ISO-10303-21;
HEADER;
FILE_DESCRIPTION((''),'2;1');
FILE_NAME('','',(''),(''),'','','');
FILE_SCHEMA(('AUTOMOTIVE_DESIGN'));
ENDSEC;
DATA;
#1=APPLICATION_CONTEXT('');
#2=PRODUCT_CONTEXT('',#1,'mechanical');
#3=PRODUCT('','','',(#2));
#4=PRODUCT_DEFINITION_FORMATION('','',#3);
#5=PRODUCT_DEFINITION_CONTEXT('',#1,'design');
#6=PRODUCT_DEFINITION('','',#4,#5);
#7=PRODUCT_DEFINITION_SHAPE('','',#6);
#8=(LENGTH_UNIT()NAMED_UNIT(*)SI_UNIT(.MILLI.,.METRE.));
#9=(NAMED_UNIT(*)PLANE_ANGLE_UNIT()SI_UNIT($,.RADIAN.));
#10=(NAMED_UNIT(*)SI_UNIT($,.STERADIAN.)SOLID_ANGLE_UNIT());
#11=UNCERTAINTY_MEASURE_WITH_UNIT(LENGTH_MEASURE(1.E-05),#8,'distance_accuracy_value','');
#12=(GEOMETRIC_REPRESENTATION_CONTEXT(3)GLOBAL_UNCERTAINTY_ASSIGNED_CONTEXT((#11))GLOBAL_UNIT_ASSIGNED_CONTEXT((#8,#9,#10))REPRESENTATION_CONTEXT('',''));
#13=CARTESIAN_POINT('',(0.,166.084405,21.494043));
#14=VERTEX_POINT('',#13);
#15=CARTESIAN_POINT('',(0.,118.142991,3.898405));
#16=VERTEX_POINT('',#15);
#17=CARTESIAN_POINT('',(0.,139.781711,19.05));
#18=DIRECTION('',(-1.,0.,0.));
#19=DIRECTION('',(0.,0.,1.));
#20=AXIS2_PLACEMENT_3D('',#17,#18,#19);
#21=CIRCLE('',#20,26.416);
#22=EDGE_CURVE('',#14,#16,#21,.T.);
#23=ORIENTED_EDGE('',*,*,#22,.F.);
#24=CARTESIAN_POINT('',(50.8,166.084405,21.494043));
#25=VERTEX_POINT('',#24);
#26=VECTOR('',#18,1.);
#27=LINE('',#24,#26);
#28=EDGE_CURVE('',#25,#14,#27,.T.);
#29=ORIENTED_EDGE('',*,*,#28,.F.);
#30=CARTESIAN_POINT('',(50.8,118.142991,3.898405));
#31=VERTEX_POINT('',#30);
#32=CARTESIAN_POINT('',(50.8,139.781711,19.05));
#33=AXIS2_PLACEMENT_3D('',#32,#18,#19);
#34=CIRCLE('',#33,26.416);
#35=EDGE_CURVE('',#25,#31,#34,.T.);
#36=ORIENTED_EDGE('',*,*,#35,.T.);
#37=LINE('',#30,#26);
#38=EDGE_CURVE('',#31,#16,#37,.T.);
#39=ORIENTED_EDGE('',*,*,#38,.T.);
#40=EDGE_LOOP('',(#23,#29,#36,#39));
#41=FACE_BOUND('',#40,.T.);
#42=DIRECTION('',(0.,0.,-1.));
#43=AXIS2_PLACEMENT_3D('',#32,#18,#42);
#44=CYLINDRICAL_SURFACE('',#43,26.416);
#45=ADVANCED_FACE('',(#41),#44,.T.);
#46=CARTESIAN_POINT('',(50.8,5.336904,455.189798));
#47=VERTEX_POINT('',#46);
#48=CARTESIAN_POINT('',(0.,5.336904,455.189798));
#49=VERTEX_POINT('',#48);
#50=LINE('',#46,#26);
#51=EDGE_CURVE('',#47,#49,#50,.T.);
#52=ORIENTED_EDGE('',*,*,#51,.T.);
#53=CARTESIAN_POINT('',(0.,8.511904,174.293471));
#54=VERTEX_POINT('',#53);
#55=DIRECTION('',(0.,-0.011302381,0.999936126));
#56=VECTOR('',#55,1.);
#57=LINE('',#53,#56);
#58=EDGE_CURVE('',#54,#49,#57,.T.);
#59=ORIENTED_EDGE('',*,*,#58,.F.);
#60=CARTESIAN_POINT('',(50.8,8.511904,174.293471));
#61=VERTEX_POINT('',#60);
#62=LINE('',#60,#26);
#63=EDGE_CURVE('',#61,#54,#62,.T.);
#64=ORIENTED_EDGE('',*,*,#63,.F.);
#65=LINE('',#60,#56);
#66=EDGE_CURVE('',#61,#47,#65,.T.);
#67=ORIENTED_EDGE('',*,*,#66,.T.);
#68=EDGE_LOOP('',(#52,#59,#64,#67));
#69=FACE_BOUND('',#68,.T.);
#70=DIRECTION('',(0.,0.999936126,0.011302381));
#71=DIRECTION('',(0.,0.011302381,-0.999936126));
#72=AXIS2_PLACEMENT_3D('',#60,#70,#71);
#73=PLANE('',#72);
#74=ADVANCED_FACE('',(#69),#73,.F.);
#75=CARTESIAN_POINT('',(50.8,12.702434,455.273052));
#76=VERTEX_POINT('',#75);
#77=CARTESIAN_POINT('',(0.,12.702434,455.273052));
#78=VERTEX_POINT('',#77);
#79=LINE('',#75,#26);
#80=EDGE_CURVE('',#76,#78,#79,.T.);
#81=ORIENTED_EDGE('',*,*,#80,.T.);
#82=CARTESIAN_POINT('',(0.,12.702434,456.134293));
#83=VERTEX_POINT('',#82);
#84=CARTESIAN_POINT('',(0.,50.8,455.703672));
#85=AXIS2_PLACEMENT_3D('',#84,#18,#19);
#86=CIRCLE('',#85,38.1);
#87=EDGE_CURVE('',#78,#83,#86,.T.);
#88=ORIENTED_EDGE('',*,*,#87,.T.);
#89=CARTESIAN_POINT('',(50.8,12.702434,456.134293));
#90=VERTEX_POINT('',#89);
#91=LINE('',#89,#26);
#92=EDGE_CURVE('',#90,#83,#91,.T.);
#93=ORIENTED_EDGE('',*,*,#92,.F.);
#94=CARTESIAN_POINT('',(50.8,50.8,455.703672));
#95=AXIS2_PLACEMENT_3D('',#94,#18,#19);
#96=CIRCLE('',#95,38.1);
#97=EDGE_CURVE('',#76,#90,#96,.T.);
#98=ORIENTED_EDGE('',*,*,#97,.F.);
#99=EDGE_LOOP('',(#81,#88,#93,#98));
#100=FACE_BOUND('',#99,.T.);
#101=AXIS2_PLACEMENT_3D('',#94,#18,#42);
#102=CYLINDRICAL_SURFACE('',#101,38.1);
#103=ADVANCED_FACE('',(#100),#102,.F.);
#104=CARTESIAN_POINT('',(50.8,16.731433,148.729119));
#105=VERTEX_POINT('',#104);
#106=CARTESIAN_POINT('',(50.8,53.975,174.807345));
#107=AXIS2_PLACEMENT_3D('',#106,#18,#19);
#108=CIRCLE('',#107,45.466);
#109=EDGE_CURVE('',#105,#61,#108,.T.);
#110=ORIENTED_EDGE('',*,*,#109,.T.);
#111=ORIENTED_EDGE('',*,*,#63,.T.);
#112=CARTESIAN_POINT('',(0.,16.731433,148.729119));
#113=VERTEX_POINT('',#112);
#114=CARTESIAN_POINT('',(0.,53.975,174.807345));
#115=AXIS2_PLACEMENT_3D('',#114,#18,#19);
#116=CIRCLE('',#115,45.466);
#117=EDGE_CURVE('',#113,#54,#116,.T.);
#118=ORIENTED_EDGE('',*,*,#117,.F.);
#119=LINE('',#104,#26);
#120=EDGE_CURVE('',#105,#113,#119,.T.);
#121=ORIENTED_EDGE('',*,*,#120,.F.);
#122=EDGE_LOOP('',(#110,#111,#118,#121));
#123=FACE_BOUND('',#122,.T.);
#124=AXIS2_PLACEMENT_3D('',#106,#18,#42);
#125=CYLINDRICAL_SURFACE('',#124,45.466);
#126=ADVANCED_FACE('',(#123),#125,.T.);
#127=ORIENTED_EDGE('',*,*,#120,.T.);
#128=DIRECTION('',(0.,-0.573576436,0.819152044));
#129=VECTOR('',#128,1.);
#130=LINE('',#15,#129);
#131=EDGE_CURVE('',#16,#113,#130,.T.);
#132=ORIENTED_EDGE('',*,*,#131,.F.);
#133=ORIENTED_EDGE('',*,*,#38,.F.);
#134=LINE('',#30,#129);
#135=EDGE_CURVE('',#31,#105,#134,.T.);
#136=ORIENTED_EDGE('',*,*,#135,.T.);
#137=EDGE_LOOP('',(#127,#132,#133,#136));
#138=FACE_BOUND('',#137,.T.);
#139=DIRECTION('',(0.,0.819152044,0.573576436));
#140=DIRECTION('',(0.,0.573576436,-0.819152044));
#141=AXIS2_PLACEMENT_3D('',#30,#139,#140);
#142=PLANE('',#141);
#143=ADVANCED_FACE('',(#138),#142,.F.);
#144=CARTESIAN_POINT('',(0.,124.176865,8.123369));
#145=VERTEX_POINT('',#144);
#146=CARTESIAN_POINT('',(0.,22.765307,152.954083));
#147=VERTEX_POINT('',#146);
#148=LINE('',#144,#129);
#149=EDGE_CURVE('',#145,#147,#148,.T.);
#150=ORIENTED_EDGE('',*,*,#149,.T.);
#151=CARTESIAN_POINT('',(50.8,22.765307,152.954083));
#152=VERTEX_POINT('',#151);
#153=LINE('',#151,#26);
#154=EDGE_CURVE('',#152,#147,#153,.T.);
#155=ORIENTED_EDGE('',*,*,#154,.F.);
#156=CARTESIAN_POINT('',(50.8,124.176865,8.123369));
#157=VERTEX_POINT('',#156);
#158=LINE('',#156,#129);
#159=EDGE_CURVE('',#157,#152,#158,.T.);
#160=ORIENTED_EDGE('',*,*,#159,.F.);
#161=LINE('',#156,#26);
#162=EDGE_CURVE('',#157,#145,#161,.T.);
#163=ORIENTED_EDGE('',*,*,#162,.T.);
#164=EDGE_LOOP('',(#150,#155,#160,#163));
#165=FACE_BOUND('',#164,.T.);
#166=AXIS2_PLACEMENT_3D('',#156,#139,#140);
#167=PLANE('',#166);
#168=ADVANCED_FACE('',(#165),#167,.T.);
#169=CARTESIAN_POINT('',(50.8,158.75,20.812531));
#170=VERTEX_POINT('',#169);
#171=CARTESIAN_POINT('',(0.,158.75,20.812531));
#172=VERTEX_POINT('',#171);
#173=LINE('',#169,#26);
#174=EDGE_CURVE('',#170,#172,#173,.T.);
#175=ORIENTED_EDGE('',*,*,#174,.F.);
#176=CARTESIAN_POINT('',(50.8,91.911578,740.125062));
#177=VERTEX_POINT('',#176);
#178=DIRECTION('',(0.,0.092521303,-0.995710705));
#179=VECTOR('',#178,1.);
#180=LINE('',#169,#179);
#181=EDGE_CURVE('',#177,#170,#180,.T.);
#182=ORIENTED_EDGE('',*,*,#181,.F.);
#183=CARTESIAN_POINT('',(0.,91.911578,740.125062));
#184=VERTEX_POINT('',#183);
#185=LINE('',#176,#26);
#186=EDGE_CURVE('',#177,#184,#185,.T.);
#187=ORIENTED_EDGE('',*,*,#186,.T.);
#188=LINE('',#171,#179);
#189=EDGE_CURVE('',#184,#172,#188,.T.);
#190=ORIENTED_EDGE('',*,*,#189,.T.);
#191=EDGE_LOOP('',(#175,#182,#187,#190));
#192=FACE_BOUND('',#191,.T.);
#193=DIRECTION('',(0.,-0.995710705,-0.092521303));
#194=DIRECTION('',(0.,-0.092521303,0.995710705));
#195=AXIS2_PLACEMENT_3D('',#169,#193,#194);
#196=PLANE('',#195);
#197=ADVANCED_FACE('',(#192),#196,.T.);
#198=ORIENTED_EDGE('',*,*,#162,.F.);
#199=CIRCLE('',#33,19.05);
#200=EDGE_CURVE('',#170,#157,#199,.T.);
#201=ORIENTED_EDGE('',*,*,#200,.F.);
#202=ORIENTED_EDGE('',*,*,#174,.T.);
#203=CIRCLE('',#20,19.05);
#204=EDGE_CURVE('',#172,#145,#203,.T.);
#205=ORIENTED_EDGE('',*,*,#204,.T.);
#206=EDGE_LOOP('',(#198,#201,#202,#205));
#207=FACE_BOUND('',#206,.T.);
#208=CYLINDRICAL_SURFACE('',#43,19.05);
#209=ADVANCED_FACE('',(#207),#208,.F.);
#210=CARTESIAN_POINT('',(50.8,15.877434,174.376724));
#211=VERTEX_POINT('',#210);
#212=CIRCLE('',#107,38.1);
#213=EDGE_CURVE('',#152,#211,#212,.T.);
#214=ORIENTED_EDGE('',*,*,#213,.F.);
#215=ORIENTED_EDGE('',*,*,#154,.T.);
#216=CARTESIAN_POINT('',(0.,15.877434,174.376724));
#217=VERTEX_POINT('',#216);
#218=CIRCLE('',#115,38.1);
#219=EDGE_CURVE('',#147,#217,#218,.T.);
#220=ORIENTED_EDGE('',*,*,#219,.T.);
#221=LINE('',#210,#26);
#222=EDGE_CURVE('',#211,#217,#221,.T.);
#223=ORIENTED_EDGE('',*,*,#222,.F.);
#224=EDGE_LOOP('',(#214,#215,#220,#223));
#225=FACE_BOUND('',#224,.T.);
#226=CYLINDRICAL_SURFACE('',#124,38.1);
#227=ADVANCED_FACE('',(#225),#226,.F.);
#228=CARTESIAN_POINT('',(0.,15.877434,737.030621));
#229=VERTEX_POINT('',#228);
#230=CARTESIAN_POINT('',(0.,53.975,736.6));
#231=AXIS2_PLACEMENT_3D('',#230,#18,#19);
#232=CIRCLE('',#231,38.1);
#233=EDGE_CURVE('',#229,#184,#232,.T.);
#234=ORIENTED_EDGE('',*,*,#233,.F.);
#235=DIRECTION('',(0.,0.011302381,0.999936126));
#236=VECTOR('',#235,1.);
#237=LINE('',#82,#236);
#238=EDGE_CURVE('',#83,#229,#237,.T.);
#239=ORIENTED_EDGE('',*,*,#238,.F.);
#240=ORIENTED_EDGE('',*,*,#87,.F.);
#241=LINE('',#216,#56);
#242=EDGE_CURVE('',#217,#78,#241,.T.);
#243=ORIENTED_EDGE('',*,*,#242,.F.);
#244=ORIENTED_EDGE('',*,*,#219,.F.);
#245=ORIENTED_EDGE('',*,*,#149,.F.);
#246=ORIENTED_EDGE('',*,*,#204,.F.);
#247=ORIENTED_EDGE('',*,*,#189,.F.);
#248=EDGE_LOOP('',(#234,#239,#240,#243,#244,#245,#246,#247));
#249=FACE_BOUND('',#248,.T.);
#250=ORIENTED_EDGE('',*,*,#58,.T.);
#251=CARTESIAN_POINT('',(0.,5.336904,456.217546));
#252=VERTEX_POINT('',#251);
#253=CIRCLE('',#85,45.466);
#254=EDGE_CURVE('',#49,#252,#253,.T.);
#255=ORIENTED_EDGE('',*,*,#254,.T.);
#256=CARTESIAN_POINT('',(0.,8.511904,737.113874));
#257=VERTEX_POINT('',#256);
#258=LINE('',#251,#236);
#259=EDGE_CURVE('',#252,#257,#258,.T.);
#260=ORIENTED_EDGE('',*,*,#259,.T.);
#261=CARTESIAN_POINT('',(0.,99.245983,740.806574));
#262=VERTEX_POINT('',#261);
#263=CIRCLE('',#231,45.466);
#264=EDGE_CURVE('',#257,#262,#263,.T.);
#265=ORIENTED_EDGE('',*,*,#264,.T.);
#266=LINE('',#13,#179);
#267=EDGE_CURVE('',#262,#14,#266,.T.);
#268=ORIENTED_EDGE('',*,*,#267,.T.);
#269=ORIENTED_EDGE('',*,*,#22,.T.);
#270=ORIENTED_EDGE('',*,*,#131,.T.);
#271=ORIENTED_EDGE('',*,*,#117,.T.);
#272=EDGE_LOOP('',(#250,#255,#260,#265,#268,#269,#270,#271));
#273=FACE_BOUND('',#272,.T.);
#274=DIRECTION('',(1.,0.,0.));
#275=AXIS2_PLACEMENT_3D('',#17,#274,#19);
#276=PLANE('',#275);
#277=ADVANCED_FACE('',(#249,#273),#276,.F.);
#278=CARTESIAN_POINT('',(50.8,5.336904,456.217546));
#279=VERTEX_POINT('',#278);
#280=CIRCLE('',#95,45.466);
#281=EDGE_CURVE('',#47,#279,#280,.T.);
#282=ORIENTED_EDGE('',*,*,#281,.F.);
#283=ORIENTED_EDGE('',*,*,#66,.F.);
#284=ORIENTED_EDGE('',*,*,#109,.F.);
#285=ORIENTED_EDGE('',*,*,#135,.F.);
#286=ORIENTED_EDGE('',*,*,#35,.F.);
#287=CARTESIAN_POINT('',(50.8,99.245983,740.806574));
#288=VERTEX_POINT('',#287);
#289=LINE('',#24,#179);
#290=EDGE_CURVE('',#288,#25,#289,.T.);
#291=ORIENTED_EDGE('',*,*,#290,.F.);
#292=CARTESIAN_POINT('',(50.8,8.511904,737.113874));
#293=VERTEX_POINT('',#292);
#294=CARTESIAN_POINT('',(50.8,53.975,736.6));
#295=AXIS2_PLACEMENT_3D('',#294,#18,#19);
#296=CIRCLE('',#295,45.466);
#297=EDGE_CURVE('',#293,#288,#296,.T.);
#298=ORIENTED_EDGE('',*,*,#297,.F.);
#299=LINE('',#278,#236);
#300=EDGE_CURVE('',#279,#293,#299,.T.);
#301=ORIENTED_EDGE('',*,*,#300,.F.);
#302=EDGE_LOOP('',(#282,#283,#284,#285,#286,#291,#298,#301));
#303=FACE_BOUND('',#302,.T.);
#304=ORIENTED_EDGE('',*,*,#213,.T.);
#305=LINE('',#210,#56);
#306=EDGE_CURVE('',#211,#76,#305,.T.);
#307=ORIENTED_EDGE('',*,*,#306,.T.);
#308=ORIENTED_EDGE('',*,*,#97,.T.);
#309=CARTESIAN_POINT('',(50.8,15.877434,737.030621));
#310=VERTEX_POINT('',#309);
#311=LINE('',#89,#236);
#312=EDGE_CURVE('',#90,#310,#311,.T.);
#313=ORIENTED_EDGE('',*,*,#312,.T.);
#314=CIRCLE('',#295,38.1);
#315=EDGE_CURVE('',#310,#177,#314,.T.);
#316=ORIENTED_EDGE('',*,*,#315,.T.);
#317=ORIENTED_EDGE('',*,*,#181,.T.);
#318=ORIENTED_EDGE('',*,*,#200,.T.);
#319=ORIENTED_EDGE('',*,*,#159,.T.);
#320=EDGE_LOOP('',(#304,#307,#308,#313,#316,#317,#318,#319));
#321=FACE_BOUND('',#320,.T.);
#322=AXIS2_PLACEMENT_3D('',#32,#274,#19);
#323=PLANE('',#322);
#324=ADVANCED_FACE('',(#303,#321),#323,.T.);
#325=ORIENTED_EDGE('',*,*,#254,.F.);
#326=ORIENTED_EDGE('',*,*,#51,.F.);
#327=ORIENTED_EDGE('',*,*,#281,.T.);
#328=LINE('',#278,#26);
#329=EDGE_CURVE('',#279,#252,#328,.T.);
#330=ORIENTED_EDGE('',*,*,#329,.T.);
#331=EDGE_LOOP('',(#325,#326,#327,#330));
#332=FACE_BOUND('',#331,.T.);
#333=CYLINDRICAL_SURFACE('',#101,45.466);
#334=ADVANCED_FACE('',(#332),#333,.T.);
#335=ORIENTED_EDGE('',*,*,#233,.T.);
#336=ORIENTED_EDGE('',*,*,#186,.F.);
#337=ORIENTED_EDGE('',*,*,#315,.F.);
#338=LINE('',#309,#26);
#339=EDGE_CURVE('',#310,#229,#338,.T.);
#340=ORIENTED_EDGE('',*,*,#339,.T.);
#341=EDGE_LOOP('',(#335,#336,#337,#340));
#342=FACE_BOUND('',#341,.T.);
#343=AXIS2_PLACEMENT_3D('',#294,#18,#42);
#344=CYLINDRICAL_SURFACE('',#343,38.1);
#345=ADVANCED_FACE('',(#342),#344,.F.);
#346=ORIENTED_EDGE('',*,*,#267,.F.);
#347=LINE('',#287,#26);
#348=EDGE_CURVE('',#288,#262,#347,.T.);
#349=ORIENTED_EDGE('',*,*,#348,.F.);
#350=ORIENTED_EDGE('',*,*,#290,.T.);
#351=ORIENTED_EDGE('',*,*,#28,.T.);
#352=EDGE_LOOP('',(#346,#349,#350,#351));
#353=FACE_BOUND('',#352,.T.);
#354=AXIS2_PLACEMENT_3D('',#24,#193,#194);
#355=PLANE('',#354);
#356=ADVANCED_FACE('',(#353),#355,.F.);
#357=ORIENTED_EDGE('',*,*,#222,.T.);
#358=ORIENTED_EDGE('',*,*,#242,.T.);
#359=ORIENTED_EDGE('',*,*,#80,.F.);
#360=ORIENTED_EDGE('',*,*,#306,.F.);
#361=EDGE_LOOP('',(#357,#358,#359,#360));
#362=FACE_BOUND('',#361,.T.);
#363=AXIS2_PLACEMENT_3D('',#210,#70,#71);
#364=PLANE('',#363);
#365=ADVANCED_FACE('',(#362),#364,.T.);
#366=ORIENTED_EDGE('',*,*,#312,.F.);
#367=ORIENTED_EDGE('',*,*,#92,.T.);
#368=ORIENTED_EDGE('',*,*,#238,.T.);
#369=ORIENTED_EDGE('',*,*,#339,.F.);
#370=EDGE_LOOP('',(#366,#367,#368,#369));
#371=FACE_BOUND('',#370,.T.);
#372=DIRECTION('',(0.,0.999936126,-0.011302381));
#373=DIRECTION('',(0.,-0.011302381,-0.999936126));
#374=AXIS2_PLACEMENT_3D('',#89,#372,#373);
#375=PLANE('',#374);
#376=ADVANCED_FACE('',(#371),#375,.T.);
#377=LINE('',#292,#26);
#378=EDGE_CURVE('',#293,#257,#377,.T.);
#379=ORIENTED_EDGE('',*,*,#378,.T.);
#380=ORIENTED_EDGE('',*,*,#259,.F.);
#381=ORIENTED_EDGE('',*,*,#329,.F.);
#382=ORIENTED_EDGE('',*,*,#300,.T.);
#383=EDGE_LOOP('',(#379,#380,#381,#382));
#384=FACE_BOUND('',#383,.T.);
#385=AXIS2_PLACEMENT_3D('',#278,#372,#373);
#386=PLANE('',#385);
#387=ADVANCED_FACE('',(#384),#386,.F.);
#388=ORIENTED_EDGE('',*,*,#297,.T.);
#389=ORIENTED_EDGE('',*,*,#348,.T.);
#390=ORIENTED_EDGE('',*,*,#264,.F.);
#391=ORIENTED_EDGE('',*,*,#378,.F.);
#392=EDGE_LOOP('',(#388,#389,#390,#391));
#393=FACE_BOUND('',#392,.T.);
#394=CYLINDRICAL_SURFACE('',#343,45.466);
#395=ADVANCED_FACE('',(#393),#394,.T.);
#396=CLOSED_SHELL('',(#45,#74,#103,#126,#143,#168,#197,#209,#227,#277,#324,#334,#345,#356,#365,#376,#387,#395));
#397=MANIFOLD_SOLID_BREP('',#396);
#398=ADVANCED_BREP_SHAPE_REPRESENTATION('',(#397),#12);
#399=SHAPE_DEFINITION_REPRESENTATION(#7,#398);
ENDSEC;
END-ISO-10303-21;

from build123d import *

# Parameters (mm, degrees)
EXTRUDE_THIN1_DEPTH     = 50.8
BODY_MOVE_COPY1_DEPTH   = 50.8
BODY_MOVE_COPY1_2_DEPTH = 50.8


# Read off the part's stored shape, not the designer's step: Body-Move/Copy1
with BuildPart() as part:
    # Sketch1 → Extrude-Thin1 (new body)
    with BuildSketch(Plane(origin=(0, 0, 0), x_dir=(0, 0, -1), z_dir=(1, 0, 0))):
        with BuildLine():
            Line((21.494042733, 166.084405055), (740.806573551, 99.245982925))
            ThreePointArc((740.806573551, 99.245982925), (782.028393343, 52.126153258), (737.113874036, 8.511904093))
            Line((737.113874036, 8.511904093), (456.21754645, 5.336904093))
            ThreePointArc((456.21754645, 5.336904093), (455.703672415, 5.334), (455.189798379, 5.336904093))
            Line((455.189798379, 5.336904093), (174.293470793, 8.511904093))
            ThreePointArc((174.293470793, 8.511904093), (160.890624168, 10.691261229), (148.729118574, 16.731433154))
            Line((148.729118574, 16.731433154), (3.898404857, 118.142990663))
            ThreePointArc((3.898404857, 118.142990663), (-5.748493412, 148.883347208), (21.494042733, 166.084405055))
        make_face()
        with BuildLine():
            Line((20.812530817, 158.75), (740.125061635, 91.91157787))
            ThreePointArc((740.125061635, 91.91157787), (774.668486042, 52.425687087), (737.0306207, 15.877433597))
            Line((737.0306207, 15.877433597), (456.134293115, 12.702433597))
            ThreePointArc((456.134293115, 12.702433597), (455.703672415, 12.7), (455.273051714, 12.702433597))
            Line((455.273051714, 12.702433597), (174.376724129, 15.877433597))
            ThreePointArc((174.376724129, 15.877433597), (163.145288409, 17.703710527), (152.954082604, 22.765307113))
            Line((152.954082604, 22.765307113), (8.123368888, 124.176864621))
            ThreePointArc((8.123368888, 124.176864621), (1.166471097, 146.345390976), (20.812530817, 158.75))
        make_face(mode=Mode.SUBTRACT)
    extrude(amount=EXTRUDE_THIN1_DEPTH)

    # Body-Move/Copy1 outline → Body-Move/Copy1 (cut)
    with BuildSketch(Plane.YZ):
        with BuildLine():
            ThreePointArc((166.084405055, -21.494042733), (164.537643621, -9.833229454), (158.082054122, 0))
            ThreePointArc((158.082054122, 0), (155.175079711, -2.417399882), (151.952776868, -4.395046666))
            ThreePointArc((151.952776868, -4.395046666), (157.382799095, -11.762737128), (158.75, -20.812530817))
            Line((158.75, -20.812530817), (91.91157787, -740.125061635))
            ThreePointArc((91.91157787, -740.125061635), (52.425687087, -774.668486042), (15.877433597, -737.0306207))
            Line((15.877433597, -737.0306207), (12.702433597, -456.134293115))
            ThreePointArc((12.702433597, -456.134293115), (12.7, -455.703672414), (12.702433597, -455.273051714))
            Line((12.702433597, -455.273051714), (15.877433597, -174.376724129))
            ThreePointArc((15.877433597, -174.376724129), (17.703710527, -163.145288409), (22.765307113, -152.954082604))
            Line((22.765307113, -152.954082604), (124.176864621, -8.123368888))
            ThreePointArc((124.176864621, -8.123368888), (125.769201584, -6.144494274), (127.610645261, -4.395046667))
            ThreePointArc((127.610645261, -4.395046667), (124.388342418, -2.417399882), (121.481368008, 0))
            ThreePointArc((121.481368008, 0), (119.717275174, -1.867931777), (118.142990663, -3.898404857))
            Line((118.142990663, -3.898404857), (16.731433154, -148.729118574))
            ThreePointArc((16.731433154, -148.729118574), (10.691261229, -160.890624168), (8.511904093, -174.293470793))
            Line((8.511904093, -174.293470793), (5.336904093, -455.189798379))
            ThreePointArc((5.336904093, -455.189798379), (5.334, -455.703672415), (5.336904093, -456.21754645))
            Line((5.336904093, -456.21754645), (8.511904093, -737.113874036))
            ThreePointArc((8.511904093, -737.113874036), (52.126153258, -782.028393343), (99.245982925, -740.806573551))
            Line((99.245982925, -740.806573551), (166.084405055, -21.494042733))
        make_face()
        with BuildLine():
            ThreePointArc((127.610645261, 4.395046667), (139.781711065, 0), (151.952776868, 4.395046666))
            ThreePointArc((151.952776868, 4.395046666), (139.781711065, 7.366), (127.610645261, 4.395046667))
        make_face()
    extrude(amount=BODY_MOVE_COPY1_DEPTH, mode=Mode.SUBTRACT)

    # Body-Move_Copy1 2 outline → Body-Move_Copy1 2 (add)
    with BuildSketch(Plane.YZ):
        with BuildLine():
            ThreePointArc((158.082054122, 0), (164.537643621, 9.833229454), (166.084405055, 21.494042733))
            Line((166.084405055, 21.494042733), (99.245982925, 740.806573551))
            ThreePointArc((99.245982925, 740.806573551), (52.126153258, 782.028393343), (8.511904093, 737.113874036))
            Line((8.511904093, 737.113874036), (5.336904093, 456.21754645))
            ThreePointArc((5.336904093, 456.21754645), (5.334, 455.703672415), (5.336904093, 455.189798379))
            Line((5.336904093, 455.189798379), (8.511904093, 174.293470793))
            ThreePointArc((8.511904093, 174.293470793), (10.691261229, 160.890624168), (16.731433154, 148.729118574))
            Line((16.731433154, 148.729118574), (118.142990663, 3.898404857))
            ThreePointArc((118.142990663, 3.898404857), (119.717275174, 1.867931777), (121.481368008, 0))
            ThreePointArc((121.481368008, 0), (124.388342418, 2.417399882), (127.610645261, 4.395046667))
            ThreePointArc((127.610645261, 4.395046667), (125.769201584, 6.144494274), (124.176864621, 8.123368888))
            Line((124.176864621, 8.123368888), (22.765307113, 152.954082604))
            ThreePointArc((22.765307113, 152.954082604), (17.703710527, 163.145288409), (15.877433597, 174.376724129))
            Line((15.877433597, 174.376724129), (12.702433597, 455.273051714))
            ThreePointArc((12.702433597, 455.273051714), (12.7, 455.703672415), (12.702433597, 456.134293115))
            Line((12.702433597, 456.134293115), (15.877433597, 737.0306207))
            ThreePointArc((15.877433597, 737.0306207), (52.425687087, 774.668486042), (91.91157787, 740.125061635))
            Line((91.91157787, 740.125061635), (158.75, 20.812530817))
            ThreePointArc((158.75, 20.812530817), (157.382799095, 11.762737128), (151.952776868, 4.395046666))
            ThreePointArc((151.952776868, 4.395046666), (155.175079711, 2.417399882), (158.082054122, 0))
        make_face()
        with BuildLine():
            ThreePointArc((127.610645261, -4.395046667), (139.781711065, -7.366), (151.952776868, -4.395046666))
            ThreePointArc((151.952776868, -4.395046666), (139.781711065, 0), (127.610645261, -4.395046667))
        make_face()
    extrude(amount=BODY_MOVE_COPY1_2_DEPTH)


solid = part.part
